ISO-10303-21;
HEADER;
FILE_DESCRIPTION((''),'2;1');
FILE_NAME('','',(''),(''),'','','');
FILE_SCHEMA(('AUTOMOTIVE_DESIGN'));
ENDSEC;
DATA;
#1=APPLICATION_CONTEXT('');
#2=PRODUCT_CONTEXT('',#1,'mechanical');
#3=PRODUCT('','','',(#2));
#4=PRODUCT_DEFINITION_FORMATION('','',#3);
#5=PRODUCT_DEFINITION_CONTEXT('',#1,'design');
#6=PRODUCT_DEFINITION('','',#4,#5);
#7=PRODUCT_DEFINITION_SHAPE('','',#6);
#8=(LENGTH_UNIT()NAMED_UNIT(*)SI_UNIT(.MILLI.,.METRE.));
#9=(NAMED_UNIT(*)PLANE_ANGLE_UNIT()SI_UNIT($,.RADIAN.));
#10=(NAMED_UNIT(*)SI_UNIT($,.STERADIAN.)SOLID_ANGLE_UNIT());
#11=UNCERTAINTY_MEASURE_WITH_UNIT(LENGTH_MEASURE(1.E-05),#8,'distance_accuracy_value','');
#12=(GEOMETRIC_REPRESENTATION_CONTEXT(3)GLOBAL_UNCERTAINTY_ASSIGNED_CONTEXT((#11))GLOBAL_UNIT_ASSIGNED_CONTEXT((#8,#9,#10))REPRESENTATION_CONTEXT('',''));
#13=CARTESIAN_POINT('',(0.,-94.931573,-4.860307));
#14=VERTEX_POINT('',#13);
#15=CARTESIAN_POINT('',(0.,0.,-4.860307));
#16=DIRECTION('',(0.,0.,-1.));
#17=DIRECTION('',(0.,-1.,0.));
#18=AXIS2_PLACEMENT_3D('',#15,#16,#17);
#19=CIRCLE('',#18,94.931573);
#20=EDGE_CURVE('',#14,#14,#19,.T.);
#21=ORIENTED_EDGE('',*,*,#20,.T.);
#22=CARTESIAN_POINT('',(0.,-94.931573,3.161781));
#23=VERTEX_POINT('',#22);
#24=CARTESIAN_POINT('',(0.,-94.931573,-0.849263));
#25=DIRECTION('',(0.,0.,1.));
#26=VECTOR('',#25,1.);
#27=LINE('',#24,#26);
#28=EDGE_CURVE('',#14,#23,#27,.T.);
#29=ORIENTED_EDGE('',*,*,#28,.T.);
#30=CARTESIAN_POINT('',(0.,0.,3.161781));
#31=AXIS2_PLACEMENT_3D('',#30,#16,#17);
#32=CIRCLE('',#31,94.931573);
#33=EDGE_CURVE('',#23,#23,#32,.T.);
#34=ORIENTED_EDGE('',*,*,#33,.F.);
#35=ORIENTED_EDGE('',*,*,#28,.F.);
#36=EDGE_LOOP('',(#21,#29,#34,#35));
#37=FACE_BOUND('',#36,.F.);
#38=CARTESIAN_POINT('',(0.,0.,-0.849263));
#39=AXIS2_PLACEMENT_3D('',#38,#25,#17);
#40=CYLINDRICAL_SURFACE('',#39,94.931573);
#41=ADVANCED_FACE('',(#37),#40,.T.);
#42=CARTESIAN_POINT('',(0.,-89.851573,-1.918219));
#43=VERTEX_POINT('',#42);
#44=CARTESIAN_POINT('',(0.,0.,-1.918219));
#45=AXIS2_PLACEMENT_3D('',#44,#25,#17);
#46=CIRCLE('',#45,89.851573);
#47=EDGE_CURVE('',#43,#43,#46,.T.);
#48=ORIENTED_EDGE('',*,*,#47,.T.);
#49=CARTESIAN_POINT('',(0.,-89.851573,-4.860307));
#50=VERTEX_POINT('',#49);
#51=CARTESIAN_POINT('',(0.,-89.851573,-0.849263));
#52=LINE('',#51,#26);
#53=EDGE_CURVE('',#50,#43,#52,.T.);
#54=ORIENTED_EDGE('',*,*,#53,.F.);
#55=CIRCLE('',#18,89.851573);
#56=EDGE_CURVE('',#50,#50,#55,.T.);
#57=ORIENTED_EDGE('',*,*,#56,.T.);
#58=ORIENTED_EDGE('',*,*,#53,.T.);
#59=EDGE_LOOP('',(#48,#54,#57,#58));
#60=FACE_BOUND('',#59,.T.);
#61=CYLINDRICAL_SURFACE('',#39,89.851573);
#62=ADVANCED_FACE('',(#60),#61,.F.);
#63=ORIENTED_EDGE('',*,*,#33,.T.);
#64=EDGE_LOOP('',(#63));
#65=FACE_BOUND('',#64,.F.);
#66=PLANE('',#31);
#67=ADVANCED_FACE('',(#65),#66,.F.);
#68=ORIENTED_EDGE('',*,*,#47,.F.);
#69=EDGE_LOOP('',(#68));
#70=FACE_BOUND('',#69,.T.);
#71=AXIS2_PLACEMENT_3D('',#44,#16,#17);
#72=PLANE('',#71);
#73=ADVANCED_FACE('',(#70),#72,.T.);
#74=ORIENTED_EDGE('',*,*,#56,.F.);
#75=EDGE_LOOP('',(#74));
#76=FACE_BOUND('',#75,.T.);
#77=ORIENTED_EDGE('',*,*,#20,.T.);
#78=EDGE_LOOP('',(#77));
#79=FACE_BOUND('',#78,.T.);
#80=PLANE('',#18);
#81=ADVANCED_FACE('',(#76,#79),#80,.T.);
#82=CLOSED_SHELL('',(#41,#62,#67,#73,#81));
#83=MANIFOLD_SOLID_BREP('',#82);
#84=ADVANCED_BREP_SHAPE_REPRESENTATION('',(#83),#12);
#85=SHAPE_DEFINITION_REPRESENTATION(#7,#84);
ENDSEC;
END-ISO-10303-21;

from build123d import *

# Parameters (mm, degrees)
F4_W = 94.9315726757
F4_H = 8.022087859
F7_T = -5.08


# Not quite as in the source:
# - the program builds the solid bodies; features that only make, move or delete a surface that nothing else refers to are left out


with BuildPart() as f6:
    # F4 (on Right) → F6 (revolve)
    with BuildSketch(Plane.YZ):
        with Locations((-47.4657863379, -0.8492631605)):
            Rectangle(F4_W, F4_H)
    revolve(axis=Axis((0, 0, -18.7146086246), (0, 0, -1)))

    # F7
    f7_openings = [f6.faces().sort_by_distance(p)[0] for p in [
        (0, 0, -4.860307),
    ]]
    offset(amount=F7_T, openings=f7_openings)


solid = f6.part
